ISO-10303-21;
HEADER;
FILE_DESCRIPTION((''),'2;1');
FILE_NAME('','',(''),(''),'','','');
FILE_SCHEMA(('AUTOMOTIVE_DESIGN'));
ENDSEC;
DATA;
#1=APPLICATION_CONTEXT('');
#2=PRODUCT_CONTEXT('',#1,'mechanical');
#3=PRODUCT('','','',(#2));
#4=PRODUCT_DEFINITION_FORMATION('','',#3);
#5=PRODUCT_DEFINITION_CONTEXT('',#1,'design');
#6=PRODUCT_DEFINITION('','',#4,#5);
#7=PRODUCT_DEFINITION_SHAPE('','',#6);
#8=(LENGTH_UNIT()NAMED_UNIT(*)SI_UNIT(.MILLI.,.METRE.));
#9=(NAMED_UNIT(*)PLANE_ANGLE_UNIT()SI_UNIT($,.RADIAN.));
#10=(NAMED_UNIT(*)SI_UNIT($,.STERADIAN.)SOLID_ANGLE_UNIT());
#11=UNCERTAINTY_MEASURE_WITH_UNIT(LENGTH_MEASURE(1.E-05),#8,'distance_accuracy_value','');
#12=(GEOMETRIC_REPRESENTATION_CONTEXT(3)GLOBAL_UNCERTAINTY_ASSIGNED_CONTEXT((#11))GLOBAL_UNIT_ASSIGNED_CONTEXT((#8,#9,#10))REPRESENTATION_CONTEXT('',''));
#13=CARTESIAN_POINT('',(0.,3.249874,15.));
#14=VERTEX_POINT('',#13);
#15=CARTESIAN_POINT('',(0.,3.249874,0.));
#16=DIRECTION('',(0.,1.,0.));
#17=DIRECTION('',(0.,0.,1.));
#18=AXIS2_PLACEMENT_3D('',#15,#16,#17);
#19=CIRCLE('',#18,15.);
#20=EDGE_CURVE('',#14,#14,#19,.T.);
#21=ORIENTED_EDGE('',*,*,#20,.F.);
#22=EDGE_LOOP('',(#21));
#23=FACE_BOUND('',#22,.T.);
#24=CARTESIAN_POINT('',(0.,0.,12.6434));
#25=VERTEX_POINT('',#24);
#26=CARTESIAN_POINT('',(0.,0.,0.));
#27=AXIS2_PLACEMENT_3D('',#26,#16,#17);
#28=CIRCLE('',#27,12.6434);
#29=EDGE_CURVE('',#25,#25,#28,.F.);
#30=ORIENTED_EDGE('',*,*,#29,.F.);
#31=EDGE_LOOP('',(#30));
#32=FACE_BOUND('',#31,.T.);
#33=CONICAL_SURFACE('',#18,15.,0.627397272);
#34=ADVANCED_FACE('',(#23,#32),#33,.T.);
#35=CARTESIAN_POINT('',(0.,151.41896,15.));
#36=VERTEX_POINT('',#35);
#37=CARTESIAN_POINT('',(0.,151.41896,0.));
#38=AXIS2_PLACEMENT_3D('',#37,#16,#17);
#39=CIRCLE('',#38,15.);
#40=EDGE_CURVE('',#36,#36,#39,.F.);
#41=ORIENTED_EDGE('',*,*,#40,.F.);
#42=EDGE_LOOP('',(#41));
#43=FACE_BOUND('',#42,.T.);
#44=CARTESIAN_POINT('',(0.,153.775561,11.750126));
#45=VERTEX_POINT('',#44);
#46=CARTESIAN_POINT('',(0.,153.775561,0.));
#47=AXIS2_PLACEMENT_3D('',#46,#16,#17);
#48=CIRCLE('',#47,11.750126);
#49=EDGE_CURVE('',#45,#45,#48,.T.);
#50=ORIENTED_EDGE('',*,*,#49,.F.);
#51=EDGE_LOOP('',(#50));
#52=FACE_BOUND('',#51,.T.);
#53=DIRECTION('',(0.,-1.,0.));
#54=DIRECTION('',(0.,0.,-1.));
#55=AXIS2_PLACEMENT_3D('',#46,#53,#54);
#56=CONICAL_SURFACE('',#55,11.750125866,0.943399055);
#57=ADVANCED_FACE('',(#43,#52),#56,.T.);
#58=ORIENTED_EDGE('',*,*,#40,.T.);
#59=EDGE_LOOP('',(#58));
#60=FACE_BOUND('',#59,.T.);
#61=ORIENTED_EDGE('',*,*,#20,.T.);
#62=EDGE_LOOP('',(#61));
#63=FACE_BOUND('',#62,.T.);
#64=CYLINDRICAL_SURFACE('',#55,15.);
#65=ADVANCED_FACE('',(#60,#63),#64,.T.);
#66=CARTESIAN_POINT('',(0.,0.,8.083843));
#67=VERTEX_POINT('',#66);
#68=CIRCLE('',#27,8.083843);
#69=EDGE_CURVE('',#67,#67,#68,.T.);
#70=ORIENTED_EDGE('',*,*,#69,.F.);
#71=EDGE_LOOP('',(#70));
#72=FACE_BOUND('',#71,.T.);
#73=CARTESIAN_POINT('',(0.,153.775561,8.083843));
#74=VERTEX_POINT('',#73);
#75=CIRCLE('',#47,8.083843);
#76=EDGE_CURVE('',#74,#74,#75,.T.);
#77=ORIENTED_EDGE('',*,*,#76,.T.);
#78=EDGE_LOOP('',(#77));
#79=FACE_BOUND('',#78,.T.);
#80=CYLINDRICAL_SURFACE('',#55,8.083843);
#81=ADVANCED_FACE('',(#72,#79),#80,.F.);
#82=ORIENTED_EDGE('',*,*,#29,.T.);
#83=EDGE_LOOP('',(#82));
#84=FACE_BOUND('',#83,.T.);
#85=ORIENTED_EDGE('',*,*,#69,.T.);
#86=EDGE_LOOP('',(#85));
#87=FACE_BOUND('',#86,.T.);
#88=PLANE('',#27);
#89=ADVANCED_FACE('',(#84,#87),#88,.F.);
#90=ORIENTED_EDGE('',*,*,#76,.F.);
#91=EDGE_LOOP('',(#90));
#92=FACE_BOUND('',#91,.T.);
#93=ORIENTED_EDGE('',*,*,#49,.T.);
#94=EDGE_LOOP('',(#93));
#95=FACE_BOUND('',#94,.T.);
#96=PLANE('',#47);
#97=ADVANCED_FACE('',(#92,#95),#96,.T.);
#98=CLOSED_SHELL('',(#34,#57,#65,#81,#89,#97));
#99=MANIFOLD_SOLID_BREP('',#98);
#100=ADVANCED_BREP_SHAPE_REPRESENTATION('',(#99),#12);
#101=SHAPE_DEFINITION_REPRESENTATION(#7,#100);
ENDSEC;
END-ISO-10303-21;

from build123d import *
from OCP.BRepFilletAPI import BRepFilletAPI_MakeChamfer

# Parameters (mm, degrees)
SKETCH1_R           = 15
BOSS_EXTRUDE1_DEPTH = 153.775560712
SKETCH2_R           = 8.083843349
CUT_EXTRUDE1_DEPTH  = 156.23183653
CHAMFER1_SIZE       = 2.356600441
CHAMFER1_SIZE2      = 3.249874134


with BuildPart() as part:
    # Sketch1 → Boss-Extrude1 (new body)
    with BuildSketch(Plane(origin=(0, 0, 0), x_dir=(1, 0, 0), z_dir=(0, 1, 0))):
        Circle(SKETCH1_R)
    extrude(amount=BOSS_EXTRUDE1_DEPTH)

    # Sketch2 → Cut-Extrude1 (cut, through all)
    with BuildSketch(Plane(origin=(0, 0, 0), x_dir=(1, 0, 0), z_dir=(0, 1, 0))):
        Circle(SKETCH2_R)
    extrude(amount=CUT_EXTRUDE1_DEPTH, mode=Mode.SUBTRACT)

    # Chamfer1: one chamfer whose edges measure the first distance from different faces: ONE call of the kernel's chamfer builder (chamfer() names one face for all edges)
    chamfer1_edges_1 = [part.edges().sort_by_distance(p)[0] for p in [
        (-15, 153.775560712, 0),
    ]]
    chamfer1_side_1 = [part.faces().sort_by_distance(p)[0] for p in [
        (-15, 76.887780356, 0),
    ]]
    chamfer1_edges_2 = [part.edges().sort_by_distance(p)[0] for p in [
        (-15, 0, 0),
    ]]
    chamfer1_side_2 = [part.faces().sort_by_distance(p)[0] for p in [
        (-14.575735931, 0, 0),
    ]]
    chamfer1 = BRepFilletAPI_MakeChamfer(part.part.solid().wrapped)
    for e in chamfer1_edges_1:
        chamfer1.Add(CHAMFER1_SIZE, CHAMFER1_SIZE2, e.wrapped, chamfer1_side_1[0].wrapped)  # the first distance lies on this face
    for e in chamfer1_edges_2:
        chamfer1.Add(CHAMFER1_SIZE, CHAMFER1_SIZE2, e.wrapped, chamfer1_side_2[0].wrapped)  # the first distance lies on this face
    add(Compound.cast(chamfer1.Shape()), mode=Mode.REPLACE)


solid = part.part
